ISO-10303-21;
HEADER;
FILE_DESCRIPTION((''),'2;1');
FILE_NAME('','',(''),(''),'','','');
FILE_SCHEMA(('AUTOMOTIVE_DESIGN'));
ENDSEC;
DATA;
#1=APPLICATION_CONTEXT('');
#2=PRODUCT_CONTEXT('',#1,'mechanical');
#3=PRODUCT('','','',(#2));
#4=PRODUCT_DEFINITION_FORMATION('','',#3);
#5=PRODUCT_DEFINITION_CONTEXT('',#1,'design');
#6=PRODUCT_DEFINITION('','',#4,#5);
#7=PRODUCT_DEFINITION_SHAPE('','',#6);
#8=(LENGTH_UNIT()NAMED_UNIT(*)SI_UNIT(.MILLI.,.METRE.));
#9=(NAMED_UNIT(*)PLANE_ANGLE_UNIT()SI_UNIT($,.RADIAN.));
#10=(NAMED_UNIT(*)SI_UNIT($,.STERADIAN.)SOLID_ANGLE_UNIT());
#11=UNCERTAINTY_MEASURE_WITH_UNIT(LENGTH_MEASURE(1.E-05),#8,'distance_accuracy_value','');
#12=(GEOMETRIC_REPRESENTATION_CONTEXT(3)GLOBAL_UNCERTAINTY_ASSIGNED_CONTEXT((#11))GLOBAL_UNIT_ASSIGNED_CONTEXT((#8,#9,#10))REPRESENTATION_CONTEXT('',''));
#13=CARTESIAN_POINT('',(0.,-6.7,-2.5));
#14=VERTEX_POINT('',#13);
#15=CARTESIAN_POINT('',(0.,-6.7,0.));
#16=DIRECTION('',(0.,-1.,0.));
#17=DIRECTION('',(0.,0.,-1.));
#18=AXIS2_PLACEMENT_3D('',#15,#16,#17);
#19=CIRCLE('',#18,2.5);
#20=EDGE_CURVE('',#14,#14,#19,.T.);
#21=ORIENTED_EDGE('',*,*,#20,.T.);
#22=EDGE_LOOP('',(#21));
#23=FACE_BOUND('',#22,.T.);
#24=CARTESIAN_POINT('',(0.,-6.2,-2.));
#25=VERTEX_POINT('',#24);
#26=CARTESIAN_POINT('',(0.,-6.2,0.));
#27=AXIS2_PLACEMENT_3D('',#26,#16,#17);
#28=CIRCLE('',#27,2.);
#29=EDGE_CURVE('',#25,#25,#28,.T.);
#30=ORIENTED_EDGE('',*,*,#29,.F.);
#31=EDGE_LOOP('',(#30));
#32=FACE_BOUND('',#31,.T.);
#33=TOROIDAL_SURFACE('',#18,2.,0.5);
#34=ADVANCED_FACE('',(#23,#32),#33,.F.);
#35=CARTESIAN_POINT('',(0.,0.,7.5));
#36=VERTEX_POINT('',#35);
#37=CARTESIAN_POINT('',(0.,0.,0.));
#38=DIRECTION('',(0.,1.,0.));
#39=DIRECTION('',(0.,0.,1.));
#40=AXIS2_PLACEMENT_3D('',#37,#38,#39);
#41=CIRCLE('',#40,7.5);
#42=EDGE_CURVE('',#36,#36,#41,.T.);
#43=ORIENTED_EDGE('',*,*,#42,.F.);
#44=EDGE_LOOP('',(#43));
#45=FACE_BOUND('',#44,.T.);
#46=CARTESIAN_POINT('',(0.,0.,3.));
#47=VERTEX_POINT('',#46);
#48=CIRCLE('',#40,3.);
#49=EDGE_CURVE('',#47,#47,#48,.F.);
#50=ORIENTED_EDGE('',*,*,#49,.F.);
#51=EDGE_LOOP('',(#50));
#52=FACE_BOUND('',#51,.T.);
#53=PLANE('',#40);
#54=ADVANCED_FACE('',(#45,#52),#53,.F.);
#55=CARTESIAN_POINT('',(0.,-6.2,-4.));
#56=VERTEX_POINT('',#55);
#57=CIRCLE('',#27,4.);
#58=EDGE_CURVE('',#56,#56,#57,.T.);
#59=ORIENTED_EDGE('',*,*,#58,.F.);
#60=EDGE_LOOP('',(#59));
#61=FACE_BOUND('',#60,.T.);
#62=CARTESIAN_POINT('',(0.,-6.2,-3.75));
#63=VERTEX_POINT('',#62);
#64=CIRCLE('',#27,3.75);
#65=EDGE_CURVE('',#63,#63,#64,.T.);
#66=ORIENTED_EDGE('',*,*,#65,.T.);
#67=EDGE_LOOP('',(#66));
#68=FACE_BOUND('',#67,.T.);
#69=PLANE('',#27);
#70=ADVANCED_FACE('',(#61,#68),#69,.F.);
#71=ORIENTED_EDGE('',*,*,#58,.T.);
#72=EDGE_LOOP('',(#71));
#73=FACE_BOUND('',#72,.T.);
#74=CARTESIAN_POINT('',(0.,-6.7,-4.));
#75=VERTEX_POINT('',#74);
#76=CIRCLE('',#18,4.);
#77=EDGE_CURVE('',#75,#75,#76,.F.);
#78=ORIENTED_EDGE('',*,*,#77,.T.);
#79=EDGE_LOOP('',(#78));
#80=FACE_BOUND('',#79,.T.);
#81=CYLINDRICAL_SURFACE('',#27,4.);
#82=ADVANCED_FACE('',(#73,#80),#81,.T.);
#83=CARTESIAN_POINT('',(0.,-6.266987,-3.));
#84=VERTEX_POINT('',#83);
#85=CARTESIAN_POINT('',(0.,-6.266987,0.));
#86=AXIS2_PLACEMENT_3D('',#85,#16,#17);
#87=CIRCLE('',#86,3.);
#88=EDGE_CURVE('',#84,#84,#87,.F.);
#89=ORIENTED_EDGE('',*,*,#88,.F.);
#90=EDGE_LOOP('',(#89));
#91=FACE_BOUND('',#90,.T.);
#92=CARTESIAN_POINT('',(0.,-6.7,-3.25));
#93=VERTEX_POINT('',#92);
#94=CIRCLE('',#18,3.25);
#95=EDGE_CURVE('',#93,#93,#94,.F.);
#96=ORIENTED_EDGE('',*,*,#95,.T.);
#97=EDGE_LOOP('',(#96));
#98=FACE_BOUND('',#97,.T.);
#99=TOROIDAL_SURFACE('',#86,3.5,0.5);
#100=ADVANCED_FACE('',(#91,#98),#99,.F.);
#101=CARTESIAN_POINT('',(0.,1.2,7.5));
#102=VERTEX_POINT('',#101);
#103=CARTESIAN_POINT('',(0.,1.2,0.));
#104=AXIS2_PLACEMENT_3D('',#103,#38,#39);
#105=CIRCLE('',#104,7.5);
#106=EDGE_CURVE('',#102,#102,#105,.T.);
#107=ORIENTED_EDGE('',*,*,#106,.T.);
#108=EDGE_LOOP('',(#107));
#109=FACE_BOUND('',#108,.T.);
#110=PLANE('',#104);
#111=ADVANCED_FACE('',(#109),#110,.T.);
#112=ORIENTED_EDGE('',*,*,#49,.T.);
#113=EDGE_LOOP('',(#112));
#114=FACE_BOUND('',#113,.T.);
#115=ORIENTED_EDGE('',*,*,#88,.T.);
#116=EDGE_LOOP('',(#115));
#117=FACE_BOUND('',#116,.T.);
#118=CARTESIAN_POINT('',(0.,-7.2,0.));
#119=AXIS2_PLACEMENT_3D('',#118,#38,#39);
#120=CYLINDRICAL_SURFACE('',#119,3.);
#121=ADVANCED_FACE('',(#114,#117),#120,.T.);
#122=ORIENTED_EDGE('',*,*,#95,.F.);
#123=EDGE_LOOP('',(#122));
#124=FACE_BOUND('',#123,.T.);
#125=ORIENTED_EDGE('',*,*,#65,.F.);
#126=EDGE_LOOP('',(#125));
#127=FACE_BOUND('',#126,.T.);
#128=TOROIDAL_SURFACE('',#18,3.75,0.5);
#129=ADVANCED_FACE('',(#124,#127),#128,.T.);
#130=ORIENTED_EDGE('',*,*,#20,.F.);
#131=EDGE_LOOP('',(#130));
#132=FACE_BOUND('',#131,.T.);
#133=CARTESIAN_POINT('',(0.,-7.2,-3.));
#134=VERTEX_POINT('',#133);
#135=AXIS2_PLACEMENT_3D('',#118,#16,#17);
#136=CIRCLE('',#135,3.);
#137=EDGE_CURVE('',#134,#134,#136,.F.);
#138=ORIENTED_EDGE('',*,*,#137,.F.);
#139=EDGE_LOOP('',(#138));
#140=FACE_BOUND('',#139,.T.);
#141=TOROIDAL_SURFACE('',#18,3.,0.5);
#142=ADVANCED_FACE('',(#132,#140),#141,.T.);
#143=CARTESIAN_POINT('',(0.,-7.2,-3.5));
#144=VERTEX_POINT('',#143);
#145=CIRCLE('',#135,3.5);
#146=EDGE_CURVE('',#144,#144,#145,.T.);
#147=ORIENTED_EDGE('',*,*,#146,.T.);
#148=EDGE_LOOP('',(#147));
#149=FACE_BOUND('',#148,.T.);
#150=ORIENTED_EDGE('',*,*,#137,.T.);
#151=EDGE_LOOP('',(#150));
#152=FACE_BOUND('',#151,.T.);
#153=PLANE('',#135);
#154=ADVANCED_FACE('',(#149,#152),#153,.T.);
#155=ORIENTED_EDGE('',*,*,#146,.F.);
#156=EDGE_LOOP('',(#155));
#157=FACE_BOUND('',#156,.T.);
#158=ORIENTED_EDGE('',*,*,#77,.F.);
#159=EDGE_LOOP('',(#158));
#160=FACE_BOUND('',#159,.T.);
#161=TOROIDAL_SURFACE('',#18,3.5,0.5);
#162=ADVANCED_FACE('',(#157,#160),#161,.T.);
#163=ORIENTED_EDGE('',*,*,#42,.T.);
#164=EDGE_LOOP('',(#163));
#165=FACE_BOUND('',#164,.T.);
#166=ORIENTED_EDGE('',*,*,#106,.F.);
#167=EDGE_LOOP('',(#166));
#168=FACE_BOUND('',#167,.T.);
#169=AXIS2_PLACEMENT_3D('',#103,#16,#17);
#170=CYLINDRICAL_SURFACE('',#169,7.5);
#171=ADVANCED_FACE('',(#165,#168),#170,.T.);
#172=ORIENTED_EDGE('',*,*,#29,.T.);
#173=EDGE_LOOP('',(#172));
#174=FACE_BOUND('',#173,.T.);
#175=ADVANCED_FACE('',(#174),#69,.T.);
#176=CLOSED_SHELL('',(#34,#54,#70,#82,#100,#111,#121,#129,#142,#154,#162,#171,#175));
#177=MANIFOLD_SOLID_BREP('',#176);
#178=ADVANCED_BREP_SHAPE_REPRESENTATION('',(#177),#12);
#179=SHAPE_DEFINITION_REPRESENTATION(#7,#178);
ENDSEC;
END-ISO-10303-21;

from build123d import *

# Parameters (mm, degrees)
ESBO_O1_R                = 7.5
RESSALTO_EXTRUS_O1_DEPTH = 1.2
ESBO_O2_R                = 3
RESSALTO_EXTRUS_O2_DEPTH = 7.2
ESBO_O3_R                = 4
RESSALTO_EXTRUS_O3_DEPTH = 1
ESBO_O4_R                = 3.25
ESBO_O4_R_2              = 3.0000000000000004
CORTE_EXTRUS_O1_DEPTH    = 0.5
ESBO_O5_R                = 2.5
CORTE_EXTRUS_O4_DEPTH    = 1
FILETE1_R                = 0.5


with BuildPart() as part:
    # Esboço1 → Ressalto-extrusão1 (new body)
    with BuildSketch(Plane(origin=(0, 0, 0), x_dir=(1, 0, 0), z_dir=(0, 1, 0))):
        with Locations(Location((0, 0, 0), (0, 0, 270))):
            Circle(ESBO_O1_R)
    extrude(amount=RESSALTO_EXTRUS_O1_DEPTH)

    # Esboço2 → Ressalto-extrusão2 (add)
    with BuildSketch(Plane.XZ):
        with Locations(Location((0, 0, 0), (0, 0, 90))):
            Circle(ESBO_O2_R)
    extrude(amount=RESSALTO_EXTRUS_O2_DEPTH)

    # Esboço3 → Ressalto-extrusão3 (add)
    with BuildSketch(Plane.XZ.offset(7.2)):
        with Locations(Location((0, 0, 0), (0, 0, 270))):
            Circle(ESBO_O3_R)
    extrude(amount=-RESSALTO_EXTRUS_O3_DEPTH)

    # Esboço4 → Corte-extrusão1 (cut)
    with BuildSketch(Plane(origin=(0, -6.2, 0), x_dir=(1, 0, 0), z_dir=(0, 1, 0))):
        with Locations(Location((0, 0, 0), (0, 0, 270))):
            Circle(ESBO_O4_R)
        with Locations(Location((0, 0, 0), (0, 0, 270))):
            Circle(ESBO_O4_R_2, mode=Mode.SUBTRACT)
    extrude(amount=-CORTE_EXTRUS_O1_DEPTH, mode=Mode.SUBTRACT)

    # Esboço5 → Corte-extrusão4 (cut)
    with BuildSketch(Plane.XZ.offset(7.2)):
        with Locations(Location((0, 0, 0), (0, 0, 270))):
            Circle(ESBO_O5_R)
    extrude(amount=-CORTE_EXTRUS_O4_DEPTH, mode=Mode.SUBTRACT)

    # Filete1
    # the kernel refuses this fillet: 0.5 mm, written as the material it adds along each edge
    with BuildSketch(Plane(origin=(0, -6.7, 0), x_dir=(-1.8e-16, 0, 1), z_dir=(-1, 0, -1.8e-16))) as filete1_piece_1:
        with BuildLine():
            CenterArc((3.5000000000000004, 0.4330127018922436), FILETE1_R, 180, 60.000000000001364)
            Line((3.2500000000000107, 1.865e-14), (3.0000000000000004, 0))
            Line((3.0000000000000004, 0), (3.0000000000000004, 0.4330127018922436))
        make_face()
    revolve(axis=Axis((0, -6.7, 0), (0, 1, 0)))
    with BuildSketch(Plane(origin=(0, -6.2, 0), x_dir=(-1.8e-16, 0, -1), z_dir=(-1, 0, 1.8e-16))) as filete1_piece_2:
        with BuildLine():
            CenterArc((2.5 - FILETE1_R, FILETE1_R), FILETE1_R, 270, 90)
            Line((2.5 - FILETE1_R, 0), (2.5, 0))
            Line((2.5, 0), (2.5, FILETE1_R))
        make_face()
    revolve(axis=Axis((0, -6.2, 0), (0, -1, 0)))
    # the kernel refuses this fillet: 0.5 mm, written as the material it takes off along each edge
    with BuildSketch(Plane(origin=(0, -7.2, 0), x_dir=(-1.8e-16, 0, -1), z_dir=(-1, 0, 1.8e-16))) as filete1_2_piece_1:
        with BuildLine():
            CenterArc((4 - FILETE1_R, -FILETE1_R), FILETE1_R, 0, 90)
            Line((4 - FILETE1_R, 0), (4, 0))
            Line((4, 0), (4, -FILETE1_R))
        make_face()
    revolve(axis=Axis((0, -7.2, 0), (0, -1, 0)), mode=Mode.SUBTRACT)
    with BuildSketch(Plane(origin=(0, -6.2, 0), x_dir=(-1.8e-16, 0, 1), z_dir=(-1, 0, -1.8e-16))) as filete1_2_piece_2:
        with BuildLine():
            CenterArc((3.25 + FILETE1_R, -FILETE1_R), FILETE1_R, 90, 90)
            Line((3.25 + FILETE1_R, 0), (3.25, 0))
            Line((3.25, 0), (3.25, -FILETE1_R))
        make_face()
    revolve(axis=Axis((0, -6.2, 0), (0, 1, 0)), mode=Mode.SUBTRACT)
    with BuildSketch(Plane(origin=(0, -7.2, 0), x_dir=(-1.8e-16, 0, -1), z_dir=(-1, 0, 1.8e-16))) as filete1_2_piece_3:
        with BuildLine():
            CenterArc((2.5 + FILETE1_R, -FILETE1_R), FILETE1_R, 90, 90)
            Line((2.5, -FILETE1_R), (2.5, 0))
            Line((2.5, 0), (2.5 + FILETE1_R, 0))
        make_face()
    revolve(axis=Axis((0, -7.2, 0), (0, -1, 0)), mode=Mode.SUBTRACT)


solid = part.part
